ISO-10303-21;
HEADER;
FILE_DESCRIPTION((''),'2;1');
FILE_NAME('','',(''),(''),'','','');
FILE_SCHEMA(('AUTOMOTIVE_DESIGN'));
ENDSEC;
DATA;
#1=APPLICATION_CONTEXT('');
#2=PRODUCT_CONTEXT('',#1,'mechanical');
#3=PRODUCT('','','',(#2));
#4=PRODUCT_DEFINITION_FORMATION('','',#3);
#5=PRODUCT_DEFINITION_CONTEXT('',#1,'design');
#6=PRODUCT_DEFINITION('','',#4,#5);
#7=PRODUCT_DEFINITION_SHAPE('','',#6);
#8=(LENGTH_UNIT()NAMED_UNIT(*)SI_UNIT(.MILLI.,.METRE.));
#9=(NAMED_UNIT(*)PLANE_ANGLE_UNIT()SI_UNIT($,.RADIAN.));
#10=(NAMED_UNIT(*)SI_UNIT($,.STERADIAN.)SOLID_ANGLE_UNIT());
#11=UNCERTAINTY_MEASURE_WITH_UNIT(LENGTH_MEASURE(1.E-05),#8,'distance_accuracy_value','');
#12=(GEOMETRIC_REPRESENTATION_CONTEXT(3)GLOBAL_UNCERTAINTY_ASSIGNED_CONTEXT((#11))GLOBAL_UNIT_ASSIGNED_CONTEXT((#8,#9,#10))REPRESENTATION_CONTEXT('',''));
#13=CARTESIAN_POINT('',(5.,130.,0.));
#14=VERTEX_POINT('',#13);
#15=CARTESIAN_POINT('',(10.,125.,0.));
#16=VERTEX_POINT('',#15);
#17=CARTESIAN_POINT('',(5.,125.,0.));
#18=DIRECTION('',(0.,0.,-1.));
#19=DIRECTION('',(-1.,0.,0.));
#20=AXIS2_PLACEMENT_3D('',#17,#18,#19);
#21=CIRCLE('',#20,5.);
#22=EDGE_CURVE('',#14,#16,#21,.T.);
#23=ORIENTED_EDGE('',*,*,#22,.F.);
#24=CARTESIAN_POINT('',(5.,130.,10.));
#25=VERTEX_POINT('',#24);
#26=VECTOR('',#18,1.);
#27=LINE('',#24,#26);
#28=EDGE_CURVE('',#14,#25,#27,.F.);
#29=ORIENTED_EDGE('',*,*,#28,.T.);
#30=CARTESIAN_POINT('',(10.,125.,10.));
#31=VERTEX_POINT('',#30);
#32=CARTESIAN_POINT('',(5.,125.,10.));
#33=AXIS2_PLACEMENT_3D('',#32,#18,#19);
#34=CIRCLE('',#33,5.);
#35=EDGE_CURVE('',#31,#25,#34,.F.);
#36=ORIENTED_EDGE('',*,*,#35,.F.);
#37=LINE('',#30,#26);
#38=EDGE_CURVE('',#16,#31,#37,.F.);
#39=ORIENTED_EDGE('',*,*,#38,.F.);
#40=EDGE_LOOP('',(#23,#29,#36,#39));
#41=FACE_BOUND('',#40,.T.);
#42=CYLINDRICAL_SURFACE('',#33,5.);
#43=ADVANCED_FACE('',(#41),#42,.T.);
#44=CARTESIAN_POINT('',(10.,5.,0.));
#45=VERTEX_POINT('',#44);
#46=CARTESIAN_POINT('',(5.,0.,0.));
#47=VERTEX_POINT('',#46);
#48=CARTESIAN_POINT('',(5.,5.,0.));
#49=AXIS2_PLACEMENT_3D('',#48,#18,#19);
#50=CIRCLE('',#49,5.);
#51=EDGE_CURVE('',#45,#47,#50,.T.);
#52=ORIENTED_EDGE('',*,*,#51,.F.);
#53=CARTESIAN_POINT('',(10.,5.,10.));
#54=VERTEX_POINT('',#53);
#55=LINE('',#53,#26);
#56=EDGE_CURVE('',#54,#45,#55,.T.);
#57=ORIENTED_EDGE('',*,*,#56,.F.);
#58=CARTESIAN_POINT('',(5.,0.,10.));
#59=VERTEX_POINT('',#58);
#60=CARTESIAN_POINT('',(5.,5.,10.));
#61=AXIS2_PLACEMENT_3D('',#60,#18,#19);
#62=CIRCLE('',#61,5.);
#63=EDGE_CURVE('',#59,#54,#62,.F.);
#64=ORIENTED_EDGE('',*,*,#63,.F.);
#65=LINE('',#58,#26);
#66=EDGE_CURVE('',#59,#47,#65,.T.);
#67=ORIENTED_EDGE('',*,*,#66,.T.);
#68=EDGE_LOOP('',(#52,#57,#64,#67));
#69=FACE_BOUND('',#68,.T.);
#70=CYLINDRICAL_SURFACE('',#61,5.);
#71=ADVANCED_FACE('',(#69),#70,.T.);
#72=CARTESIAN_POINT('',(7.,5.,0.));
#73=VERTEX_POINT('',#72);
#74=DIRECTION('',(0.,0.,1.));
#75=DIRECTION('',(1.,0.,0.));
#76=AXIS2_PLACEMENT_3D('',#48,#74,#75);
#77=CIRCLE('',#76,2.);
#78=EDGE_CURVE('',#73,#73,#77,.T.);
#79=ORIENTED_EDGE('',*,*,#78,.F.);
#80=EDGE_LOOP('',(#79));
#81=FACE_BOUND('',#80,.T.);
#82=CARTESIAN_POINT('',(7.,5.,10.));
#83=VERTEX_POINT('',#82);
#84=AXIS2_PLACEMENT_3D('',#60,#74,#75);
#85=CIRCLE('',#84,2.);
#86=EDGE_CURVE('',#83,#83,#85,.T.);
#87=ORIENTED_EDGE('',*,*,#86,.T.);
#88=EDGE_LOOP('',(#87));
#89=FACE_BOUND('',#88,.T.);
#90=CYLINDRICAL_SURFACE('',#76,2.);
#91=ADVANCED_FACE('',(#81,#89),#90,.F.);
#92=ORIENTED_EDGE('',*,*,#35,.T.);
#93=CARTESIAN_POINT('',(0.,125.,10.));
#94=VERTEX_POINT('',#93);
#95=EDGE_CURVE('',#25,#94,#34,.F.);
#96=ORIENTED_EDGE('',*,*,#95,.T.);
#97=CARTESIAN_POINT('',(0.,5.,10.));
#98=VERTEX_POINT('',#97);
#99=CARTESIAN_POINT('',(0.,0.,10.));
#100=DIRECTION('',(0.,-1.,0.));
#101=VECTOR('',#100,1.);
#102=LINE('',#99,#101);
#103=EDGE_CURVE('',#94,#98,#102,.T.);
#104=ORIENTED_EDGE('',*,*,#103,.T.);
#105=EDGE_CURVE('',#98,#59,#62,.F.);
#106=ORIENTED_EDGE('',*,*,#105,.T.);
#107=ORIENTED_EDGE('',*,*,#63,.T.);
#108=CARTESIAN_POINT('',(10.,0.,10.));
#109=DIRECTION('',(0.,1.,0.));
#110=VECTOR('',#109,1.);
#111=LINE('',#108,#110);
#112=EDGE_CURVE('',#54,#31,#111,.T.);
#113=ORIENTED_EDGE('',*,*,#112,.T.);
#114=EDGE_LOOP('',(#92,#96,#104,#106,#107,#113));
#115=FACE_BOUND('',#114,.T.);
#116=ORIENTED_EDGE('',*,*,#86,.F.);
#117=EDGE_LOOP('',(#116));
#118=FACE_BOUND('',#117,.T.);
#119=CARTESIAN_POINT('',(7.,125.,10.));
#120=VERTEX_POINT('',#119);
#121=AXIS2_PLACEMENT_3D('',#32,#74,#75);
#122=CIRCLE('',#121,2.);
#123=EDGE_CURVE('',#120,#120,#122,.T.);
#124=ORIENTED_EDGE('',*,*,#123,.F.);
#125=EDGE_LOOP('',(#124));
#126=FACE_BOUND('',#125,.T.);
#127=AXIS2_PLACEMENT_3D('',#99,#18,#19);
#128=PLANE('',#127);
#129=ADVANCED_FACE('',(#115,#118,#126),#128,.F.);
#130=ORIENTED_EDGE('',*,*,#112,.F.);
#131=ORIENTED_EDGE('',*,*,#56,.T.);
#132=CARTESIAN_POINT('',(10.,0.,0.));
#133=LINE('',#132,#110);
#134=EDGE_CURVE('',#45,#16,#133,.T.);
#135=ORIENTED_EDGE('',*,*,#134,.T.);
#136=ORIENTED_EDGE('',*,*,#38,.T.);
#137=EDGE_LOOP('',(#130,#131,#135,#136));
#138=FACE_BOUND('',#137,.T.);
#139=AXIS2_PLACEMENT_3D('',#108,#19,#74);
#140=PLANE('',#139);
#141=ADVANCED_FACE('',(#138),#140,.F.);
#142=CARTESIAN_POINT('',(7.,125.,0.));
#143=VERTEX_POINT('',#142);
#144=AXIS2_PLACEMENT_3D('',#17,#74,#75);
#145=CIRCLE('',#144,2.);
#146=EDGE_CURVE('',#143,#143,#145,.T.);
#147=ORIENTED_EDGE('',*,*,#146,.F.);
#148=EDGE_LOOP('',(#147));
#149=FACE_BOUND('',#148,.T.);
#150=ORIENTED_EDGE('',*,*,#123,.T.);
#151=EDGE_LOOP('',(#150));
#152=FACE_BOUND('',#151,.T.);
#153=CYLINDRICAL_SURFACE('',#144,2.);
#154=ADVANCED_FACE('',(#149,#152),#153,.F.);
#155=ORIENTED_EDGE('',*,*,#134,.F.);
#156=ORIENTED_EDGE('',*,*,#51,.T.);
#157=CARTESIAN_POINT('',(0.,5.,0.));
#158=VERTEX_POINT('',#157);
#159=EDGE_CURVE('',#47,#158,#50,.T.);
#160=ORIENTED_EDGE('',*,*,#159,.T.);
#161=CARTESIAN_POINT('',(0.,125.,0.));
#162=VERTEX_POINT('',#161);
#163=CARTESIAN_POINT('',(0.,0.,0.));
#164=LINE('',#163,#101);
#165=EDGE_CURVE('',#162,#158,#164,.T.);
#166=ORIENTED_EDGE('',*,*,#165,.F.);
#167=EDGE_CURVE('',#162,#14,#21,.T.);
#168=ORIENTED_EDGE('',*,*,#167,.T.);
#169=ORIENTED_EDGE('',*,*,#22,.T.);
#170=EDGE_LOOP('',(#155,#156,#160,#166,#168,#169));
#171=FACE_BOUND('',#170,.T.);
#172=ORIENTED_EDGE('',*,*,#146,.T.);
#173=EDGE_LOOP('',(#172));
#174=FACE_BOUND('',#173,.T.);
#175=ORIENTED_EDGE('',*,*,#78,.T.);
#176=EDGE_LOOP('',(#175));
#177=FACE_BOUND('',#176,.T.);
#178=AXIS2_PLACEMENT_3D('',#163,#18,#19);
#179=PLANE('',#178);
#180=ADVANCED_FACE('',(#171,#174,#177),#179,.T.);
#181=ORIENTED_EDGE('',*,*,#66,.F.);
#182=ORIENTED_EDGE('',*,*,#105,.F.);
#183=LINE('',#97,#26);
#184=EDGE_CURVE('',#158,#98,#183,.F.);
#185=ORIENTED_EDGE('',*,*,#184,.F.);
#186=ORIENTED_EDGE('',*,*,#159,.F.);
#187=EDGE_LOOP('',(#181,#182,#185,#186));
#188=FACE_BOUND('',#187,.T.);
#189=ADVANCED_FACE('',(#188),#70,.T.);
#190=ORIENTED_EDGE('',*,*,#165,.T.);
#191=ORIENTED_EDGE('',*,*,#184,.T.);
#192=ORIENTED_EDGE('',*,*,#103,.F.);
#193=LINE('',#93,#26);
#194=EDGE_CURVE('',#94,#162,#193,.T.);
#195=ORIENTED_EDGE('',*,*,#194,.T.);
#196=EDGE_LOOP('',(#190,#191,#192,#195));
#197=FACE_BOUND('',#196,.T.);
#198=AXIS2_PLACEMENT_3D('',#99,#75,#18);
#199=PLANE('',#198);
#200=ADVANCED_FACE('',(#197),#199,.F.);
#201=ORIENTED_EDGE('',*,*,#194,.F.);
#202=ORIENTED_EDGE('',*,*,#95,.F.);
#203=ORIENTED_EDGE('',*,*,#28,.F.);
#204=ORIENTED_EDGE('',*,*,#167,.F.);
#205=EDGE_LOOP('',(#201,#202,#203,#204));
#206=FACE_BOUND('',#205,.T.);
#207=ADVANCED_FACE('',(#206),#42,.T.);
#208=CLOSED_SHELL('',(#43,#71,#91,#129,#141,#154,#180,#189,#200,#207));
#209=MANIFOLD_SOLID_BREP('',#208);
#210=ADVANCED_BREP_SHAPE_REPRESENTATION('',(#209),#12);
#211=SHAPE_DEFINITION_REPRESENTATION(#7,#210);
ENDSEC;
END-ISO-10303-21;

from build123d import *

# Parameters (mm, degrees)
ESQUISSE1_W             = 10
ESQUISSE1_H             = 130
BOSS_EXTRU_1_DEPTH      = 10
ESQUISSE2_R             = 2
ENL_V_MAT_EXTRU_1_DEPTH = 10
CONG_1_R                = 5


with BuildPart() as part:
    # Esquisse1 → Boss.-Extru.1 (new body)
    with BuildSketch(Plane.XY):
        with Locations((5, 65)):
            Rectangle(ESQUISSE1_W, ESQUISSE1_H)
    extrude(amount=BOSS_EXTRU_1_DEPTH)

    # Esquisse2 → Enlèv. mat.-Extru.1 (cut)
    with BuildSketch(Plane.XY.offset(10)):
        with Locations((5, 125)):
            Circle(ESQUISSE2_R)
        with Locations((5, 5)):
            Circle(ESQUISSE2_R)
    extrude(amount=-ENL_V_MAT_EXTRU_1_DEPTH, mode=Mode.SUBTRACT)

    # Congé1
    cong_1_edges = [part.edges().sort_by_distance(p)[0] for p in [
        (10, 130, 5),
        (0, 130, 5),
        (10, 0, 5),
        (0, 0, 5),
    ]]
    fillet(cong_1_edges, radius=CONG_1_R - 0.0001)  # a hair under: the kernel refuses the full size


solid = part.part
